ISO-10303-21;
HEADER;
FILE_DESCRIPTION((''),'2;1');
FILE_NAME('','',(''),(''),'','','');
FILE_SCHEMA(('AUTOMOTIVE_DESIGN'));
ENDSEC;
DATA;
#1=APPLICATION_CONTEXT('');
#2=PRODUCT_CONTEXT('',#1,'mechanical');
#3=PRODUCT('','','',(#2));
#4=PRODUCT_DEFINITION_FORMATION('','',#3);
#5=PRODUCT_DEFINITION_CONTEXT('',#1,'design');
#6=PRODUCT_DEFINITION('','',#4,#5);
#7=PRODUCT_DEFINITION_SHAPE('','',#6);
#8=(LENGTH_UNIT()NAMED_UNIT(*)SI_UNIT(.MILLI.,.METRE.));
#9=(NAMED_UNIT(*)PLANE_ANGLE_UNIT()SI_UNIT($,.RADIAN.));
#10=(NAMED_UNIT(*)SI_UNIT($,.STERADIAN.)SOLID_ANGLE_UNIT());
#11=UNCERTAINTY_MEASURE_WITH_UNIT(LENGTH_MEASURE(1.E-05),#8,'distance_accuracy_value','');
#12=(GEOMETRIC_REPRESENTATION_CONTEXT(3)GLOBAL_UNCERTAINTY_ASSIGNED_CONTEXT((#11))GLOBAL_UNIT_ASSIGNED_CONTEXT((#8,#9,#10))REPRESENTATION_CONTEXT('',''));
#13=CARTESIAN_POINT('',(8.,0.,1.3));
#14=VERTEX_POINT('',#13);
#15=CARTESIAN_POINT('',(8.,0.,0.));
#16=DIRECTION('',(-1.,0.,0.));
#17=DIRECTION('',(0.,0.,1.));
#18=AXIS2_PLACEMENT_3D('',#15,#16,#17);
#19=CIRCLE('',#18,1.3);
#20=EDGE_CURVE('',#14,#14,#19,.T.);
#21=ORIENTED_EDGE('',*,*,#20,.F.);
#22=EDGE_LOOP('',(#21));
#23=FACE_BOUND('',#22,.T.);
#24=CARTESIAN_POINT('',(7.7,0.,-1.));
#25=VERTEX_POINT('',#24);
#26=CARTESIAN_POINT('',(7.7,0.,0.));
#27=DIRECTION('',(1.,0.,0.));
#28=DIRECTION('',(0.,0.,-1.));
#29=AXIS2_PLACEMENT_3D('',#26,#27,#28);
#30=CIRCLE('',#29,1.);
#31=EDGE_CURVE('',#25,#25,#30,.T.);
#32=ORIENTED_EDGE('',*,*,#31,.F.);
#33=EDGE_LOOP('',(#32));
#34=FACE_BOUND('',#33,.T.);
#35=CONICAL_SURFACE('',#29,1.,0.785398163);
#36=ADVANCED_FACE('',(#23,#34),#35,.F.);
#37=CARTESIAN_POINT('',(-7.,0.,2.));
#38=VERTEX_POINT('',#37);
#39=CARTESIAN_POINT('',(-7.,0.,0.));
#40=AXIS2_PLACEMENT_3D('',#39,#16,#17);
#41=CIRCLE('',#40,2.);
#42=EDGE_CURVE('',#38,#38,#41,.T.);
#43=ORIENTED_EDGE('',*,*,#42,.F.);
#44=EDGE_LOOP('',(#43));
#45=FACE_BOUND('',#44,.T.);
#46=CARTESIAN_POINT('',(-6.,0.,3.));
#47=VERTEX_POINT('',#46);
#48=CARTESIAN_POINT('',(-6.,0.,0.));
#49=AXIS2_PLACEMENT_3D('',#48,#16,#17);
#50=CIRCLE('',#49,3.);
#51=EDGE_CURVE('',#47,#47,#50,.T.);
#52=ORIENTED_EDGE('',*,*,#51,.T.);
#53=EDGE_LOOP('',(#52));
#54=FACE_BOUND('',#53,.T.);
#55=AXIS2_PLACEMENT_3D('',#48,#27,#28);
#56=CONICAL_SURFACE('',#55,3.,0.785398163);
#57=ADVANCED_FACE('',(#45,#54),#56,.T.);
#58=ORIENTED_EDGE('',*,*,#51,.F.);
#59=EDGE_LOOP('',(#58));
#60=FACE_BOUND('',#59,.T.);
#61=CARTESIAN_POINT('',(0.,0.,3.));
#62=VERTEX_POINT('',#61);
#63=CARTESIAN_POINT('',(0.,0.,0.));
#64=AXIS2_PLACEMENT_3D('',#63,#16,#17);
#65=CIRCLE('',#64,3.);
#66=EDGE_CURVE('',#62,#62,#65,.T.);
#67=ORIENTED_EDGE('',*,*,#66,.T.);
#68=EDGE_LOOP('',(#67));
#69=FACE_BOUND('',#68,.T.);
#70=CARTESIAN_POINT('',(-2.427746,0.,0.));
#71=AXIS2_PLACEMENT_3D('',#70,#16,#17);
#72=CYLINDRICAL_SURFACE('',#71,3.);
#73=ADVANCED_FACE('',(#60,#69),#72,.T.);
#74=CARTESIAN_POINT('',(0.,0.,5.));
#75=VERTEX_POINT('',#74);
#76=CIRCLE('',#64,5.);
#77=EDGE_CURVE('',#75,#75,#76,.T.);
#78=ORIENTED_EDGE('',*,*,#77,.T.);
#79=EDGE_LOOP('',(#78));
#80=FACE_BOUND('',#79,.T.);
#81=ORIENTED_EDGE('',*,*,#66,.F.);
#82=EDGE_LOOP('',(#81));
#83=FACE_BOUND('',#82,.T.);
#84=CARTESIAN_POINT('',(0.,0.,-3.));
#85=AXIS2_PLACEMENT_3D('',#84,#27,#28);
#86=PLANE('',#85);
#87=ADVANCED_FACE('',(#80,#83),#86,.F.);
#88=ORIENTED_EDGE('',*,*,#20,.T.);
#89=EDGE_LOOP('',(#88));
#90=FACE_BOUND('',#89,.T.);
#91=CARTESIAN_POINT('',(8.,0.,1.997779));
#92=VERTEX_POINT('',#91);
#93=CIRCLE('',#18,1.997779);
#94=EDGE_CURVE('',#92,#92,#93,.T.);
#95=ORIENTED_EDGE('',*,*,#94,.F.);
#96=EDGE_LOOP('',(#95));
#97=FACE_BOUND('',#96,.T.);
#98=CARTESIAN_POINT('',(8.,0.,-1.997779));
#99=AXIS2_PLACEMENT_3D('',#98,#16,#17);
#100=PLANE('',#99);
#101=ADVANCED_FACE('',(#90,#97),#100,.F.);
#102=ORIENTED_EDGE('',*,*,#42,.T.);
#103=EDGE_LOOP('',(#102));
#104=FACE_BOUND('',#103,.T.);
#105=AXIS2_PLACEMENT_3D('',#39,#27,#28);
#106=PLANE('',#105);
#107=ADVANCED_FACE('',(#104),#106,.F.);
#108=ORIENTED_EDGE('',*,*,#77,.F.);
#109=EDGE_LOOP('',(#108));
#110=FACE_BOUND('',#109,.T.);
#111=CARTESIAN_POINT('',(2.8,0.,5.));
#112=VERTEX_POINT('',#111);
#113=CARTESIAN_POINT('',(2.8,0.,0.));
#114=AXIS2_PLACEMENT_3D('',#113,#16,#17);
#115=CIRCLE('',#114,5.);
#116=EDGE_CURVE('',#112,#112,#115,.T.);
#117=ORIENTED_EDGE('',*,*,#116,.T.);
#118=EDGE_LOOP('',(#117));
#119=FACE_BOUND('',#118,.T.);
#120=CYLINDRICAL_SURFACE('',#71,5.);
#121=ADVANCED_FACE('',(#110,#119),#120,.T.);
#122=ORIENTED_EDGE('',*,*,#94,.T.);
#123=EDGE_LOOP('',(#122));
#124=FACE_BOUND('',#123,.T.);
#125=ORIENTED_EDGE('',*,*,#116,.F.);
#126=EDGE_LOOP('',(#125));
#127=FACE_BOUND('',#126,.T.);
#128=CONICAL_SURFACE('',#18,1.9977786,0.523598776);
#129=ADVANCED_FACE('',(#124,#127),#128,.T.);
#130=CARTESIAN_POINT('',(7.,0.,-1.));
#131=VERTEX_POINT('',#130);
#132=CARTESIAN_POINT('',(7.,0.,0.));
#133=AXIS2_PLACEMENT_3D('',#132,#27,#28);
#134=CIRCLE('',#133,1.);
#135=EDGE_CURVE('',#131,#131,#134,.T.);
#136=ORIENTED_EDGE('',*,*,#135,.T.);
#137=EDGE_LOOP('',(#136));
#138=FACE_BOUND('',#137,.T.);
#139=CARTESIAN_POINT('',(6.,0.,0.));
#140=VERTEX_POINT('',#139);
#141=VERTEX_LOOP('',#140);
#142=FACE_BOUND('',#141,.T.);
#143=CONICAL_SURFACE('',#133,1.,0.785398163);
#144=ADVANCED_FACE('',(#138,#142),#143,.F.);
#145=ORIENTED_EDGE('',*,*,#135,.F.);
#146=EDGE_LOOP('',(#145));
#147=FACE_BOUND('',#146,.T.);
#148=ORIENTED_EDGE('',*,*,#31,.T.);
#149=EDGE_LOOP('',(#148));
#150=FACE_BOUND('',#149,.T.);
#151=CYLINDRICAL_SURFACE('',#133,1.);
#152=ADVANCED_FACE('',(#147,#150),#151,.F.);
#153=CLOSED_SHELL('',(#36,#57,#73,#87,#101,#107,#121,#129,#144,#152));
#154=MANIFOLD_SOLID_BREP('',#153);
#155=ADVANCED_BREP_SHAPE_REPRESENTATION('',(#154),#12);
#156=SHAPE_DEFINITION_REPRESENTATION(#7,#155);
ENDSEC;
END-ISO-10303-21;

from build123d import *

# Parameters (mm, degrees)
SKETCH2_R          = 1
CUT_EXTRUDE1_DEPTH = 0.3
CHAMFER1_SIZE      = 0.3
SKETCH3_R          = 1
CUT_EXTRUDE2_DEPTH = 0.7


with BuildPart() as part:
    # Sketch1 → Revolve1 (revolve)
    with BuildSketch(Plane(origin=(0, 0, 0), x_dir=(1, 0, 0), z_dir=(0, 1, 0)), mode=Mode.PRIVATE) as revolve1_sk:
        Polygon((-7, 0), (-7, 2), (-6, 3), (0, 3), (0, 5), (2.8, 5), (8, 1.9977786), (8, 0), align=None)
    revolve(revolve1_sk.sketch.rotate(Axis((-2.427745665, 0, 0), (1, 0, 0)), 180), axis=Axis((-2.427745665, 0, 0), (1, 0, 0)))

    # Sketch2 → Cut-Extrude1 (cut)
    with BuildSketch(Plane(origin=(8, 0, 0), x_dir=(0, 0, -1), z_dir=(1, 0, 0))):
        Circle(SKETCH2_R)
    extrude(amount=-CUT_EXTRUDE1_DEPTH, mode=Mode.SUBTRACT)

    # Chamfer1
    chamfer1_edges = [part.edges().sort_by_distance(p)[0] for p in [
        (8, 0, 1),
    ]]
    chamfer(chamfer1_edges, length=CHAMFER1_SIZE - 0.0001)  # a hair under: the kernel refuses the full size

    # Sketch3 → Cut-Extrude2 (cut)
    with BuildSketch(Plane(origin=(7.7, 0, 0), x_dir=(0, 0, -1), z_dir=(1, 0, 0))):
        Circle(SKETCH3_R)
    extrude(amount=-CUT_EXTRUDE2_DEPTH, mode=Mode.SUBTRACT)

    # Cut-Extrude3 cone 1 section (through the dimple's axis) → Cut-Extrude3 (revolve, cut)
    with BuildSketch(Plane(origin=(7, 0, 0), x_dir=(0, 0, -1), z_dir=(0, 1, 0))):
        Polygon((0, 0), (1, 0), (0, 1), align=None)
    revolve(axis=Axis((7, 0, 0), (-1, 0, 0)), mode=Mode.SUBTRACT)


solid = part.part
